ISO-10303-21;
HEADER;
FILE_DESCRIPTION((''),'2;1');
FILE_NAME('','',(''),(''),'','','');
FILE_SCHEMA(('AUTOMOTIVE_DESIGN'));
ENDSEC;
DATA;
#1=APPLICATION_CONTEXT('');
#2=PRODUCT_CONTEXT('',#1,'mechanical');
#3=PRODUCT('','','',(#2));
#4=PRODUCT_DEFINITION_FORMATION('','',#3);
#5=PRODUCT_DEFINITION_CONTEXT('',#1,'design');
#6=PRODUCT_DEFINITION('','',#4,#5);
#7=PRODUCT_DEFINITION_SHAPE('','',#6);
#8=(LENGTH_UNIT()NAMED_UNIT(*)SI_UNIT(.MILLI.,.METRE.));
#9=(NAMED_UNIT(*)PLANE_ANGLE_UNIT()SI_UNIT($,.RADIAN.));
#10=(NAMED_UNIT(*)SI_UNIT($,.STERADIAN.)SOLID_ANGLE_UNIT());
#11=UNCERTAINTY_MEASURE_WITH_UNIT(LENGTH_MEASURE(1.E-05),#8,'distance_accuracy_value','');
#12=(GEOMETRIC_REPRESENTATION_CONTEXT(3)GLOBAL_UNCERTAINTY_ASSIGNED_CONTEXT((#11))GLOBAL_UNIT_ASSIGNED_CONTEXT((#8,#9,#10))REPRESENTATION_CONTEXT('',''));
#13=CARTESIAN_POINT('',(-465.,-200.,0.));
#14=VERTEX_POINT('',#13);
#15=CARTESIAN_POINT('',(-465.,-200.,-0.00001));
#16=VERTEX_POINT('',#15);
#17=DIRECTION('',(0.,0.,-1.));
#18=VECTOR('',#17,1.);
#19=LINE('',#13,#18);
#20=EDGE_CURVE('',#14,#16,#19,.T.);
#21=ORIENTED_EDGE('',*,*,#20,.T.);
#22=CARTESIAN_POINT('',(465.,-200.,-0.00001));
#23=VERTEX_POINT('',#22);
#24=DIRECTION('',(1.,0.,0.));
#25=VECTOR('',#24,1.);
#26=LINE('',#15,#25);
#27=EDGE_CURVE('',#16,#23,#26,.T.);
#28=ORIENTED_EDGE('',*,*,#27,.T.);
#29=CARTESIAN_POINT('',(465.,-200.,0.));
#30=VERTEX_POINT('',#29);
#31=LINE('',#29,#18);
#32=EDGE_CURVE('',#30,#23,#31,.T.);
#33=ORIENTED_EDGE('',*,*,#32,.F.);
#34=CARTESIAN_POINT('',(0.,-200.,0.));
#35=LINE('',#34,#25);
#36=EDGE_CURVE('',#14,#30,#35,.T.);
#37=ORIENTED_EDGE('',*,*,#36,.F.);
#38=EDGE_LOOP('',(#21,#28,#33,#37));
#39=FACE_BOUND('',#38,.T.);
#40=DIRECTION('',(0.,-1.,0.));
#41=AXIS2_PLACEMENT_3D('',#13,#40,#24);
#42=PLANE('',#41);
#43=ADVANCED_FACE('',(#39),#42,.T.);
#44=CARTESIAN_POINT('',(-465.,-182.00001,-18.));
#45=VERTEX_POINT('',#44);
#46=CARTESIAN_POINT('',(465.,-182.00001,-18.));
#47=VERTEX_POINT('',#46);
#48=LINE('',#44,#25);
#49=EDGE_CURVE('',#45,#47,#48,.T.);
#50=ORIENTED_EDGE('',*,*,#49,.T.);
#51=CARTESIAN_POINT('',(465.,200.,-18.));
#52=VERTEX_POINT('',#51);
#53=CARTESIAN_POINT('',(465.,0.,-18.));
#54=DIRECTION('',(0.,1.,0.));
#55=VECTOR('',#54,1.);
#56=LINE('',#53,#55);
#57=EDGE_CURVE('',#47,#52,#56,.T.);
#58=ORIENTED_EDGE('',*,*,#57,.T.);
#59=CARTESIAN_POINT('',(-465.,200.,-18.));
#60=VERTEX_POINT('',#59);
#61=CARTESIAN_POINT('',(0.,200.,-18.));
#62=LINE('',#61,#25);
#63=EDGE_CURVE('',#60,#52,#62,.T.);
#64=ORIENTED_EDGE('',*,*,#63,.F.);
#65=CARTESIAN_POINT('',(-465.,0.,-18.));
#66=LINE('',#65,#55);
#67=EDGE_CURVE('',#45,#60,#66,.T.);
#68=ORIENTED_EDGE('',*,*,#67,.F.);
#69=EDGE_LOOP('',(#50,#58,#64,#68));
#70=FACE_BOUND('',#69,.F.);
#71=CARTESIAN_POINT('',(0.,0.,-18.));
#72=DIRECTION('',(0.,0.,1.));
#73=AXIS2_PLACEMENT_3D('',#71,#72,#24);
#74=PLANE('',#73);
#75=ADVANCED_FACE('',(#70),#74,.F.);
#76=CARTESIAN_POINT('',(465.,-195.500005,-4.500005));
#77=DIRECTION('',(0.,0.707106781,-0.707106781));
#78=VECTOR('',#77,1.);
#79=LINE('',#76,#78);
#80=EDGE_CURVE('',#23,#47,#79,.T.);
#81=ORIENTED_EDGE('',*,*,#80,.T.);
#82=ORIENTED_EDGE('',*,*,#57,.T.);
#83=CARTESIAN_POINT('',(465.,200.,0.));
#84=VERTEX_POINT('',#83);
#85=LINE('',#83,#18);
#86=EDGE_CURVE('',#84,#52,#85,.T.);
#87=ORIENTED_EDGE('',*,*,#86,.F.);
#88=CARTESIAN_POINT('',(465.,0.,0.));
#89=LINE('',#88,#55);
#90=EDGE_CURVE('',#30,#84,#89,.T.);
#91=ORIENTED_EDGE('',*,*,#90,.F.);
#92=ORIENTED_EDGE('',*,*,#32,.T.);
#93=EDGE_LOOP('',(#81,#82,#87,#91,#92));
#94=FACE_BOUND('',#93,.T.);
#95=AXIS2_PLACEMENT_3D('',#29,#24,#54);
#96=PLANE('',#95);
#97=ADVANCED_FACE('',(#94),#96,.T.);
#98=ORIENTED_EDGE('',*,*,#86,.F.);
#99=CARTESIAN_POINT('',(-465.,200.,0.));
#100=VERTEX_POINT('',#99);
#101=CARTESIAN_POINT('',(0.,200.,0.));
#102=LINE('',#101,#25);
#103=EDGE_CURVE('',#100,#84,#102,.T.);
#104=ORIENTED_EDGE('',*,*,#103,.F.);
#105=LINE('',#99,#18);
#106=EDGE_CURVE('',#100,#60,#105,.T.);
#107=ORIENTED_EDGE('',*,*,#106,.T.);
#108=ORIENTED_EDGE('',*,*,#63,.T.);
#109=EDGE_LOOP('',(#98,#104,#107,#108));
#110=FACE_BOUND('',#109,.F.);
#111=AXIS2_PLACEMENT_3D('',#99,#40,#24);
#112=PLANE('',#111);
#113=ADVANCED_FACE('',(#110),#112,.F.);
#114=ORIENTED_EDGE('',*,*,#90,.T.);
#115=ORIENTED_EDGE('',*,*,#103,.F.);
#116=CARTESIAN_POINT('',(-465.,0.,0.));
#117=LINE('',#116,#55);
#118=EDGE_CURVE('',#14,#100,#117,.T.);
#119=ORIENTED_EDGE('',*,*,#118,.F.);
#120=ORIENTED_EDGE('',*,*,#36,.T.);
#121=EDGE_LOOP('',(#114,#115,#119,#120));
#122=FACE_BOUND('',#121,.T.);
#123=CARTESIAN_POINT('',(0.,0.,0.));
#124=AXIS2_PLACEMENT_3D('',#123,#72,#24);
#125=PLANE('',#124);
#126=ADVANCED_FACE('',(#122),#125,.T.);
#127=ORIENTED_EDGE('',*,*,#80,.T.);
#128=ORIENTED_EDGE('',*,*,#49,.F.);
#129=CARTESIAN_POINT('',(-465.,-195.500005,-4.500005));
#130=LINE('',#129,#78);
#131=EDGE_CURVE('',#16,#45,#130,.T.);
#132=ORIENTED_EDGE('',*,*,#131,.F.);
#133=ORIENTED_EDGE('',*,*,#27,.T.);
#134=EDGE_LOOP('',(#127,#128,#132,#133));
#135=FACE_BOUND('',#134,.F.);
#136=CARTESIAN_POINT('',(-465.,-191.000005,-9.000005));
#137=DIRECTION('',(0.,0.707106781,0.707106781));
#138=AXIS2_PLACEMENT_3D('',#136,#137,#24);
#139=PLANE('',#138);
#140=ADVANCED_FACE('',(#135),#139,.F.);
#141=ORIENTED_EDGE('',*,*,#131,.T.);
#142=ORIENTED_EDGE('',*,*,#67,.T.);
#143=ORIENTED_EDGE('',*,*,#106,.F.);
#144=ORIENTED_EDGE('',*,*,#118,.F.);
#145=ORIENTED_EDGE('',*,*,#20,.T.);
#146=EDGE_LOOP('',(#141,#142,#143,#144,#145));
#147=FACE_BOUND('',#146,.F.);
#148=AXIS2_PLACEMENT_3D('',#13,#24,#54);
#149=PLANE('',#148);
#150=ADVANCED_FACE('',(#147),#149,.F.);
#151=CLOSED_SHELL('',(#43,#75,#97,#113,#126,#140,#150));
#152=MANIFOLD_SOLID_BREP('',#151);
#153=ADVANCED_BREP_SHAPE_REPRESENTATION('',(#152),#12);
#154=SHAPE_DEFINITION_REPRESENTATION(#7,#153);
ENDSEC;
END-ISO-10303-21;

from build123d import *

# Parameters (mm, degrees)
F0_W     = 930
F0_H     = 400
F1_DEPTH = 18
F2_SIZE  = 17.99999


# Not quite as in the source:
# - a fillet or chamfer is up to 0.001 mm smaller than in the source, because OpenCascade refuses the exact size


with BuildPart() as f1:
    # F0 (on Top) → F1 (new body)
    with BuildSketch(Plane.XY):
        Rectangle(F0_W, F0_H)
    extrude(amount=-F1_DEPTH)

    # F2 (size 18 in the source; OpenCascade refuses exactly that, so slightly less here)
    f2_edges = [f1.edges().sort_by_distance(p)[0] for p in [
        (0, -200, -18),
    ]]
    chamfer(f2_edges, length=F2_SIZE)


solid = f1.part
